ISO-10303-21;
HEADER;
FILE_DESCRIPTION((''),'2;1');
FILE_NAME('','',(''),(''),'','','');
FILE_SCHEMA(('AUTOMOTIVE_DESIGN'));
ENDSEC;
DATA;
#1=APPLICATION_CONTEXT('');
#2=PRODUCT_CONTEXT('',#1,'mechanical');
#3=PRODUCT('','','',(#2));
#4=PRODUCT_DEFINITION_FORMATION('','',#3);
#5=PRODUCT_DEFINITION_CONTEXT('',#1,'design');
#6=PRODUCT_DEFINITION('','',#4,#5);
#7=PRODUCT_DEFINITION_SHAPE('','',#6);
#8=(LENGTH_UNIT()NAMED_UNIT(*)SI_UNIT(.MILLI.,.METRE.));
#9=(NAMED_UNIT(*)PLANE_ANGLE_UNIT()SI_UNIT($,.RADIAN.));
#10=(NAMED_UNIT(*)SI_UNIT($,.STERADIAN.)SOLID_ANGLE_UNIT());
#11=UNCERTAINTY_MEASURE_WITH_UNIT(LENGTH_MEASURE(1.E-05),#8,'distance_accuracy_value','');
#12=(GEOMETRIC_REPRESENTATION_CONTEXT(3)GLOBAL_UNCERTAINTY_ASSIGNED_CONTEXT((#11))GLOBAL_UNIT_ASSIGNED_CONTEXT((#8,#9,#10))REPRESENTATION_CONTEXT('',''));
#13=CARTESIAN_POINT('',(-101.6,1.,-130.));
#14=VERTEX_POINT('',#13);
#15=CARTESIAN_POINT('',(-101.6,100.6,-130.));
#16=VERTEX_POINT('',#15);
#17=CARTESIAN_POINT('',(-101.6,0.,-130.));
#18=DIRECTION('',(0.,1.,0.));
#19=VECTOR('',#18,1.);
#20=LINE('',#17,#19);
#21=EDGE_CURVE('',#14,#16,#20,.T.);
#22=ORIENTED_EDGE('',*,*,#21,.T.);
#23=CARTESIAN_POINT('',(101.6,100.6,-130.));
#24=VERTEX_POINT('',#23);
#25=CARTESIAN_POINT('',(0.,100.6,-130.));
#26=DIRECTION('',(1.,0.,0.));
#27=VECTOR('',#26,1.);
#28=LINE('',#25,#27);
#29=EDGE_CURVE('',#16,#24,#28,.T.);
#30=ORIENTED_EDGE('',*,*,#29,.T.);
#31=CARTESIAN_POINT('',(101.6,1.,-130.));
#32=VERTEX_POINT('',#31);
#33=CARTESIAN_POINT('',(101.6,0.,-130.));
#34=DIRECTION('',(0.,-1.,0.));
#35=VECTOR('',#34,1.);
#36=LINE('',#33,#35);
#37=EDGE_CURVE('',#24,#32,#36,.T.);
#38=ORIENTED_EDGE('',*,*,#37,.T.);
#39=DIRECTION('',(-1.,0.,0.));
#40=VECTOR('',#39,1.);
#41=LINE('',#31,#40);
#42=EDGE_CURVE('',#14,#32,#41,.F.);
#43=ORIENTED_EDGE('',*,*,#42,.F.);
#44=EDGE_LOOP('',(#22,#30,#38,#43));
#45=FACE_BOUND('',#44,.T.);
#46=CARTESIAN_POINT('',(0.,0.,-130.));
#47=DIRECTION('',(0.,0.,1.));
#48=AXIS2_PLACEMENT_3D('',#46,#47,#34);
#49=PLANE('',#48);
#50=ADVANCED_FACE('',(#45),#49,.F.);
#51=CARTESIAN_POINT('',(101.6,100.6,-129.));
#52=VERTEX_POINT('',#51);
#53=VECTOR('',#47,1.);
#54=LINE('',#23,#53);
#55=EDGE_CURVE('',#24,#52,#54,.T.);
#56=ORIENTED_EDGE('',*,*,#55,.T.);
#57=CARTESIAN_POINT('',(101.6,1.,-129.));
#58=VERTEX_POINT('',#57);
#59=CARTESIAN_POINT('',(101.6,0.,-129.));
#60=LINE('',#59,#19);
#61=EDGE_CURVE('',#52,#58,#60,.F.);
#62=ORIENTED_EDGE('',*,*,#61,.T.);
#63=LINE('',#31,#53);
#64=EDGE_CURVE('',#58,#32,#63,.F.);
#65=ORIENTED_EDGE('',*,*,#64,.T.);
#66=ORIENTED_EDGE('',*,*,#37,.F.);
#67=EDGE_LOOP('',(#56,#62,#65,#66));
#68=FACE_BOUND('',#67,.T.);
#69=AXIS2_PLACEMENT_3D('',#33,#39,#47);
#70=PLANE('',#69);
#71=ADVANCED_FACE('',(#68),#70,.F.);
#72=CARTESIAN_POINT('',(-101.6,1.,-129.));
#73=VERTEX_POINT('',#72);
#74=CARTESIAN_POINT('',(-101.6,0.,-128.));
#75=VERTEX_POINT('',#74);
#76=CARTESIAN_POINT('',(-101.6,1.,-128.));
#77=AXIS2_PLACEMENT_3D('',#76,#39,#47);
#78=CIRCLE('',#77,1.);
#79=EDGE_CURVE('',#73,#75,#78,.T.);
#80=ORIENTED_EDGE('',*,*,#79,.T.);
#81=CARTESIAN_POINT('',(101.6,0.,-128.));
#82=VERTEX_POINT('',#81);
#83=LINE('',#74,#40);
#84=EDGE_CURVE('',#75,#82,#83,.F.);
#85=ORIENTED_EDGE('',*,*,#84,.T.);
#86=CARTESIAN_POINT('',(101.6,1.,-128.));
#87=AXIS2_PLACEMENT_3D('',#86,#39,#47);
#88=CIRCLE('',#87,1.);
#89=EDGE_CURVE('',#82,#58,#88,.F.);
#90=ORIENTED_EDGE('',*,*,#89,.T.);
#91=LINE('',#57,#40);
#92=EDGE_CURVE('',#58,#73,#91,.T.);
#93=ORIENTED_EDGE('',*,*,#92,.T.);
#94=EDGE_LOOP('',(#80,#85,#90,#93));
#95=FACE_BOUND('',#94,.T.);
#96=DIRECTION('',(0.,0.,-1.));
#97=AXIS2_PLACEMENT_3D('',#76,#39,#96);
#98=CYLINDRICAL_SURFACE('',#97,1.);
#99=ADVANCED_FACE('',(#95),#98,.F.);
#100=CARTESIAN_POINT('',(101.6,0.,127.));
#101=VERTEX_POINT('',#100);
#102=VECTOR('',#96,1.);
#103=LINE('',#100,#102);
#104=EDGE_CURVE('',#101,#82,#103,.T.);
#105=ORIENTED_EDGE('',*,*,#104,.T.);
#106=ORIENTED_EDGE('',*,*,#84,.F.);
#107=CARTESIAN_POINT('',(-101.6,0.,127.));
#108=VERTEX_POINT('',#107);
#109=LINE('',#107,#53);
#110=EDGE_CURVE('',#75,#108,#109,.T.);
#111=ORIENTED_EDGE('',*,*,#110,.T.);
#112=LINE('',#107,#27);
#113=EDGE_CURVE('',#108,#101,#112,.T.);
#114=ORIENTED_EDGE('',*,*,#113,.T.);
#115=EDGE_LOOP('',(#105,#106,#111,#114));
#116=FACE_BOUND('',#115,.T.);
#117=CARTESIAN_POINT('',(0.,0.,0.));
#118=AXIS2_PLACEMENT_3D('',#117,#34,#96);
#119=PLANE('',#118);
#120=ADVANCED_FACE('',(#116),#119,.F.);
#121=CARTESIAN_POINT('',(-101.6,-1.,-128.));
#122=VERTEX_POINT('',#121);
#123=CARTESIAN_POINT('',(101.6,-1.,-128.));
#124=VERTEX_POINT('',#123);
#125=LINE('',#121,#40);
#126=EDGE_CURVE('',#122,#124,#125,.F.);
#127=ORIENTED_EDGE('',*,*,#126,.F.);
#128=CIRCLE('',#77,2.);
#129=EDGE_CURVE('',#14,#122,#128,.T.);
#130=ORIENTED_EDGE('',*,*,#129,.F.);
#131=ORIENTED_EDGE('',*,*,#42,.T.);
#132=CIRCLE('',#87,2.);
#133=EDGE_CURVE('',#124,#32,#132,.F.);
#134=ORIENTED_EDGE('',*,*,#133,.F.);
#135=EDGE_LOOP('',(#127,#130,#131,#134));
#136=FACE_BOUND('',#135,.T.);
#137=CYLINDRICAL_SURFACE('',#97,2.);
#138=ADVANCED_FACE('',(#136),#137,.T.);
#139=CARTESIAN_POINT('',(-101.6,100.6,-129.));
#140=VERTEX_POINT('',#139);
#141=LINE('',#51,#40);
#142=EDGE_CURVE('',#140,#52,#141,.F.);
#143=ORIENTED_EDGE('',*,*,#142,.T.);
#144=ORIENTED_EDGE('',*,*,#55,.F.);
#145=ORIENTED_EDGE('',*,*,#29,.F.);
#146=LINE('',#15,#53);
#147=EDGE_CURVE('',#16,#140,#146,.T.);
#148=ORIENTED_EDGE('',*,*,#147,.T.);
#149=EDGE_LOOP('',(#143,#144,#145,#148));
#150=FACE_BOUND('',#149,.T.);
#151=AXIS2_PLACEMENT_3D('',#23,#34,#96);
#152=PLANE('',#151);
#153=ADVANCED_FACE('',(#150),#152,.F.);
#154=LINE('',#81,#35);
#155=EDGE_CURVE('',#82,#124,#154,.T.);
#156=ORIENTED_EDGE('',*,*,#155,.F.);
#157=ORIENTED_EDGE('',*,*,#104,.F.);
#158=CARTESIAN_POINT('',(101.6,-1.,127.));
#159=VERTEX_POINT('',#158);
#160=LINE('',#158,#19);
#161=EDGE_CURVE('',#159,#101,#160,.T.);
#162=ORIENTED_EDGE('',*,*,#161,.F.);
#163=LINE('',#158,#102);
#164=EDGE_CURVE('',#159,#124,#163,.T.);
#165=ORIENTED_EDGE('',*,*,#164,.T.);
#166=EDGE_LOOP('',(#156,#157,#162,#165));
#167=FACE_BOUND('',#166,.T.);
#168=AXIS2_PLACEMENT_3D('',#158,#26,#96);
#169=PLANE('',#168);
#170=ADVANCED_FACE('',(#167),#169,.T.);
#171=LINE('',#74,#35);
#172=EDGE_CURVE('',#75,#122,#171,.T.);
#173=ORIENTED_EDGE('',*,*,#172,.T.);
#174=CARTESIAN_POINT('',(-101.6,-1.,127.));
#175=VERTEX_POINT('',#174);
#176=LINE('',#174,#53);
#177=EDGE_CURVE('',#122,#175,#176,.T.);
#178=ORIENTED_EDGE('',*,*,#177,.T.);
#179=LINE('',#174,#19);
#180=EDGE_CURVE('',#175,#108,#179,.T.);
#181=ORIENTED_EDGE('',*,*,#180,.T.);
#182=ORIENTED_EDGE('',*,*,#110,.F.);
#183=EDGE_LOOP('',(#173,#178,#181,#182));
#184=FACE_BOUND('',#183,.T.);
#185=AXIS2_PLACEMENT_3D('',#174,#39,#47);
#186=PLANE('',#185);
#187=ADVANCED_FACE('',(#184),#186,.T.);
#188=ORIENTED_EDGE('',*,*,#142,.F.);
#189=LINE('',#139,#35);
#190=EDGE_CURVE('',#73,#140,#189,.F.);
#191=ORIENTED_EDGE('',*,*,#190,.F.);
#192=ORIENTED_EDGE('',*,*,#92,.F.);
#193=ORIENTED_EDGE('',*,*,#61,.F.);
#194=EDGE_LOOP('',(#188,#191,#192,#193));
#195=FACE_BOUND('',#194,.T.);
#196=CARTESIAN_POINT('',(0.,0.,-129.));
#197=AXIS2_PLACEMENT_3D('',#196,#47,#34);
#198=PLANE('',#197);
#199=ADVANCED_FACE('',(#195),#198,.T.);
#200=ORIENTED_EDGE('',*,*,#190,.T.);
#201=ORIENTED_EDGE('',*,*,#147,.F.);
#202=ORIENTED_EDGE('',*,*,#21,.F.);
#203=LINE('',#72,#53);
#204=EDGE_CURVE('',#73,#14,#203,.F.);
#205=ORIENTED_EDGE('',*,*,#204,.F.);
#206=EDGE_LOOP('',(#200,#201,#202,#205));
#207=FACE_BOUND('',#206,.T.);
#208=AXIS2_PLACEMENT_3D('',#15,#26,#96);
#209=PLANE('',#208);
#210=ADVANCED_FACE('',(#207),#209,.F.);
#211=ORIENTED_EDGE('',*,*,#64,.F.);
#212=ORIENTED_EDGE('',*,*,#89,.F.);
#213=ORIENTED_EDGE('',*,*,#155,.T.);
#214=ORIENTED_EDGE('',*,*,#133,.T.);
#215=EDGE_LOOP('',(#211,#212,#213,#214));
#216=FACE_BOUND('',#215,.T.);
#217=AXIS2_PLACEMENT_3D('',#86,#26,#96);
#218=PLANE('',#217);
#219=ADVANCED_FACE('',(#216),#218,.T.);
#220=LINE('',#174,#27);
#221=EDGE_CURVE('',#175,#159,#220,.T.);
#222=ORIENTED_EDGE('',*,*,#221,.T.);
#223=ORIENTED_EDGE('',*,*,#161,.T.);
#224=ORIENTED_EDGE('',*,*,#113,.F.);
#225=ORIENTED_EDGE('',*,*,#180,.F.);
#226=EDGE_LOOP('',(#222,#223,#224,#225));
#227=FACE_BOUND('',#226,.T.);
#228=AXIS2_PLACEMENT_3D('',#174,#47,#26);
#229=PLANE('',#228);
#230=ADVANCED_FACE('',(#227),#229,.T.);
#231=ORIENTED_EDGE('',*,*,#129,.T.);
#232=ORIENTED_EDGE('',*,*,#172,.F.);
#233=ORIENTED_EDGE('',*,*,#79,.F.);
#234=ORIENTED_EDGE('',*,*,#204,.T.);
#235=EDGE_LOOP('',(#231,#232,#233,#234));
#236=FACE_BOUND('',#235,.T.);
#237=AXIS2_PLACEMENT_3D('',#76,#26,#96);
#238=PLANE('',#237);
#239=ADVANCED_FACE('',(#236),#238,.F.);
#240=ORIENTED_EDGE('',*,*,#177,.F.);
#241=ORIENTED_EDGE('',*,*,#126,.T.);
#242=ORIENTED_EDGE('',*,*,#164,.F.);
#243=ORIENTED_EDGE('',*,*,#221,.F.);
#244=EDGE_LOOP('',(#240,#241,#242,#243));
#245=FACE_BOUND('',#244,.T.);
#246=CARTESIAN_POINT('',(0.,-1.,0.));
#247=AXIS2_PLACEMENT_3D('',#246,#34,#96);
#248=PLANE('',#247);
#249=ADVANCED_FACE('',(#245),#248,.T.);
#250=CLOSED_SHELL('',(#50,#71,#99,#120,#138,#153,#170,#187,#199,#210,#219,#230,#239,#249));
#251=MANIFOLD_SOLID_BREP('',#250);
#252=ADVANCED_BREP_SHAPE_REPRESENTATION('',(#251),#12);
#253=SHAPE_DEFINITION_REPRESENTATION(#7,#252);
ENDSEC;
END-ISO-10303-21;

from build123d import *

# Parameters (mm, degrees)
SKETCH1_W          = 203.2
SKETCH1_H          = 254
BASE_FLANGE1_DEPTH = 1
EDGE_FLANGE1_DEPTH = 203.2


# Sheet-metal steps are written as plain solids
with BuildPart() as part:
    # Sketch1 → Base-Flange1 (new body)
    with BuildSketch(Plane(origin=(0, 0, 0), x_dir=(1, 0, 0), z_dir=(0, 1, 0))):
        Rectangle(SKETCH1_W, SKETCH1_H)
    extrude(amount=-BASE_FLANGE1_DEPTH)

    # Edge-Flange1 section (across the edge) → Edge-Flange1 (add)
    with BuildSketch(Plane(origin=(101.6, 0, -130), x_dir=(0, 0, 1), z_dir=(-1, 0, 0))):
        with BuildLine():
            Line((0, 1), (0, 100.6))
            Line((0, 100.6), (1, 100.6))
            Line((1, 100.6), (1, 1))
            ThreePointArc((1, 1), (1.292893219, 0.292893219), (2, 0))
            Line((2, 0), (3, 0))
            Line((3, 0), (3, -1))
            Line((3, -1), (2, -1))
            ThreePointArc((2, -1), (0.585786438, -0.414213562), (0, 1))
        make_face()
    extrude(amount=EDGE_FLANGE1_DEPTH)


solid = part.part
